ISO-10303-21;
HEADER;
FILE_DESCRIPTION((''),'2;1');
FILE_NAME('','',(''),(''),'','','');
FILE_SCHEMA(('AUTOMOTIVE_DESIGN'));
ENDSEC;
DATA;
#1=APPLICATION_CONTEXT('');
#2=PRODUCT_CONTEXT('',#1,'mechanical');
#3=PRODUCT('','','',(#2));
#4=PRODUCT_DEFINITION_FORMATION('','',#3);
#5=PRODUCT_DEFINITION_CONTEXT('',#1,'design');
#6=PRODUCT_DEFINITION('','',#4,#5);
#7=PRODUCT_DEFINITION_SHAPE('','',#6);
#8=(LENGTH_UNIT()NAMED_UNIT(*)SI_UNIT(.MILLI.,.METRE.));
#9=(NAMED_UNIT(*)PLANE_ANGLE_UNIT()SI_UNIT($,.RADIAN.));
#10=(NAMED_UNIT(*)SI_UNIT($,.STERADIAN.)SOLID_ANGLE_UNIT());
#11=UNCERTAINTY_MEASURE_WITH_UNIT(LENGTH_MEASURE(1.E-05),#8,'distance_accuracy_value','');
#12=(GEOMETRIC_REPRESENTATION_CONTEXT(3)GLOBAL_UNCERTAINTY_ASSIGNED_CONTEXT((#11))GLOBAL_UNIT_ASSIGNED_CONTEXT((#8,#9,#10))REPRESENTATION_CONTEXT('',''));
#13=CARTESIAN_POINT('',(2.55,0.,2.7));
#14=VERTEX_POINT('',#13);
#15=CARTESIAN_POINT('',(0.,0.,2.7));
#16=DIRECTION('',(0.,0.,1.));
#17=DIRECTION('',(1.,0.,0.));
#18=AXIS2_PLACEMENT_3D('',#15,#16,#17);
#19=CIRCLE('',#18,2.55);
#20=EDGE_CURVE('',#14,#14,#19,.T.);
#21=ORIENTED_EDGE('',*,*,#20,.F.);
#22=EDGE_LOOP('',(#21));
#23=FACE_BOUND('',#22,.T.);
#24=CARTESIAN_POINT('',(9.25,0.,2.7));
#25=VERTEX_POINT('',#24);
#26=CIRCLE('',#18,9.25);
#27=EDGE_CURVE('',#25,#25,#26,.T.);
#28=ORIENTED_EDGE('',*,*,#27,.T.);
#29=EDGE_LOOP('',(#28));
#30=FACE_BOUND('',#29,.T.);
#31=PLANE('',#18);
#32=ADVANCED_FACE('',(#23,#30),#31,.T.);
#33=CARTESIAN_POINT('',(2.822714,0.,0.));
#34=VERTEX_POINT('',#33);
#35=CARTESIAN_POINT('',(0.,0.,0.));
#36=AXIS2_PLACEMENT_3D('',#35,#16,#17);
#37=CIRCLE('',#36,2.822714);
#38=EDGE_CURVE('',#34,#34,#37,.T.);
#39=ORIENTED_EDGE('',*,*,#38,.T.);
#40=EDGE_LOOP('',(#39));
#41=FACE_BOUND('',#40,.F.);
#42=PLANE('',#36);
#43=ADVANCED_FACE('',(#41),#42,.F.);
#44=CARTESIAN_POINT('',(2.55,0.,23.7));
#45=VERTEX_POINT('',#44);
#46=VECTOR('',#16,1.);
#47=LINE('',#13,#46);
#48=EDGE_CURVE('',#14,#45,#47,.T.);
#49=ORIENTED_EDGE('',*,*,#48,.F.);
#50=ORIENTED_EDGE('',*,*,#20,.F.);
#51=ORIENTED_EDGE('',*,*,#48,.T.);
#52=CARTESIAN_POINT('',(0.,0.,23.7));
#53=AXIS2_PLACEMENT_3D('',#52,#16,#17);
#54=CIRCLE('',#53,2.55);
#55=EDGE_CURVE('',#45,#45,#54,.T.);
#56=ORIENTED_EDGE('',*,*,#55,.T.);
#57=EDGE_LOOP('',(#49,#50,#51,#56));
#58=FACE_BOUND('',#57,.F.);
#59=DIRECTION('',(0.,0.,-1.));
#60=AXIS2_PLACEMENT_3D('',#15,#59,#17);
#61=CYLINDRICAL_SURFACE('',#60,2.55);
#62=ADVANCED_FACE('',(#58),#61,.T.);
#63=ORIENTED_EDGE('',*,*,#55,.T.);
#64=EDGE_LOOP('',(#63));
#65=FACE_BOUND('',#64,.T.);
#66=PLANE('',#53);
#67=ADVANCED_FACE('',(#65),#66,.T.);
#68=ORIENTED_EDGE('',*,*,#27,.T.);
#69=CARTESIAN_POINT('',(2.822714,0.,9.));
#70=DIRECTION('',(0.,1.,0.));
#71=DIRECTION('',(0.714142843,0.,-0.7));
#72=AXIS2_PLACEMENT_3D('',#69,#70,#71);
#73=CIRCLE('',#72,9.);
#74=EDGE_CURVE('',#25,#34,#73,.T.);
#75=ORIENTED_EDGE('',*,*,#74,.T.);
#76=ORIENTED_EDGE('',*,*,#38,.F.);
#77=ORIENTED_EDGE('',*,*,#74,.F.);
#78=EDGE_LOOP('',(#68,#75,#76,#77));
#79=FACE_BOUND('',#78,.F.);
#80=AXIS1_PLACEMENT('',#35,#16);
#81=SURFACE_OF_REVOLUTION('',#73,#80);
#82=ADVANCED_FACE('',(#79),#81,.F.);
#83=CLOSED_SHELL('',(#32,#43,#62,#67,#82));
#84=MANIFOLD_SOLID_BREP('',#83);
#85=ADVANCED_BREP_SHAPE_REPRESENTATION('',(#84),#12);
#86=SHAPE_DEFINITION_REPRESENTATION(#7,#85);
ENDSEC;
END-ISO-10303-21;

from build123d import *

# Parameters (mm, degrees)
F0_R     = 9.25
F1_DEPTH = 2.7
F2_R     = 2.55
F3_DEPTH = 21


# Not quite as in the source:
# - a fillet or chamfer that OpenCascade refuses, or shapes differently, is made with other operations: its cross-section is extruded or revolved along the edge and cut away or added


with BuildPart() as f1:
    # F0 (on Top) → F1 (new body)
    with BuildSketch(Plane.XY):
        Circle(F0_R)
    extrude(amount=F1_DEPTH)

    # F2 (on face) → F3 (join)
    with BuildSketch(Plane.XY.offset(2.7)):
        Circle(F2_R)
    extrude(amount=F3_DEPTH)

    # F4: fillet of radius 9 on 1 edges, made by hand

    # F4_s1 → F4_t2 (revolve, cut)
    with BuildSketch(Plane.XZ):
        with BuildLine():
            ThreePointArc((9.25, 2.7), (6.3083994259, 0.7024099884), (2.8227144143, 0))
            Line((2.8227144143, 0), (9.25, 0))
            Line((9.25, 0), (9.25, 2.7))
        make_face()
    revolve(axis=Axis((0, 0, 0), (0, 0, 1)), mode=Mode.SUBTRACT)


solid = f1.part
